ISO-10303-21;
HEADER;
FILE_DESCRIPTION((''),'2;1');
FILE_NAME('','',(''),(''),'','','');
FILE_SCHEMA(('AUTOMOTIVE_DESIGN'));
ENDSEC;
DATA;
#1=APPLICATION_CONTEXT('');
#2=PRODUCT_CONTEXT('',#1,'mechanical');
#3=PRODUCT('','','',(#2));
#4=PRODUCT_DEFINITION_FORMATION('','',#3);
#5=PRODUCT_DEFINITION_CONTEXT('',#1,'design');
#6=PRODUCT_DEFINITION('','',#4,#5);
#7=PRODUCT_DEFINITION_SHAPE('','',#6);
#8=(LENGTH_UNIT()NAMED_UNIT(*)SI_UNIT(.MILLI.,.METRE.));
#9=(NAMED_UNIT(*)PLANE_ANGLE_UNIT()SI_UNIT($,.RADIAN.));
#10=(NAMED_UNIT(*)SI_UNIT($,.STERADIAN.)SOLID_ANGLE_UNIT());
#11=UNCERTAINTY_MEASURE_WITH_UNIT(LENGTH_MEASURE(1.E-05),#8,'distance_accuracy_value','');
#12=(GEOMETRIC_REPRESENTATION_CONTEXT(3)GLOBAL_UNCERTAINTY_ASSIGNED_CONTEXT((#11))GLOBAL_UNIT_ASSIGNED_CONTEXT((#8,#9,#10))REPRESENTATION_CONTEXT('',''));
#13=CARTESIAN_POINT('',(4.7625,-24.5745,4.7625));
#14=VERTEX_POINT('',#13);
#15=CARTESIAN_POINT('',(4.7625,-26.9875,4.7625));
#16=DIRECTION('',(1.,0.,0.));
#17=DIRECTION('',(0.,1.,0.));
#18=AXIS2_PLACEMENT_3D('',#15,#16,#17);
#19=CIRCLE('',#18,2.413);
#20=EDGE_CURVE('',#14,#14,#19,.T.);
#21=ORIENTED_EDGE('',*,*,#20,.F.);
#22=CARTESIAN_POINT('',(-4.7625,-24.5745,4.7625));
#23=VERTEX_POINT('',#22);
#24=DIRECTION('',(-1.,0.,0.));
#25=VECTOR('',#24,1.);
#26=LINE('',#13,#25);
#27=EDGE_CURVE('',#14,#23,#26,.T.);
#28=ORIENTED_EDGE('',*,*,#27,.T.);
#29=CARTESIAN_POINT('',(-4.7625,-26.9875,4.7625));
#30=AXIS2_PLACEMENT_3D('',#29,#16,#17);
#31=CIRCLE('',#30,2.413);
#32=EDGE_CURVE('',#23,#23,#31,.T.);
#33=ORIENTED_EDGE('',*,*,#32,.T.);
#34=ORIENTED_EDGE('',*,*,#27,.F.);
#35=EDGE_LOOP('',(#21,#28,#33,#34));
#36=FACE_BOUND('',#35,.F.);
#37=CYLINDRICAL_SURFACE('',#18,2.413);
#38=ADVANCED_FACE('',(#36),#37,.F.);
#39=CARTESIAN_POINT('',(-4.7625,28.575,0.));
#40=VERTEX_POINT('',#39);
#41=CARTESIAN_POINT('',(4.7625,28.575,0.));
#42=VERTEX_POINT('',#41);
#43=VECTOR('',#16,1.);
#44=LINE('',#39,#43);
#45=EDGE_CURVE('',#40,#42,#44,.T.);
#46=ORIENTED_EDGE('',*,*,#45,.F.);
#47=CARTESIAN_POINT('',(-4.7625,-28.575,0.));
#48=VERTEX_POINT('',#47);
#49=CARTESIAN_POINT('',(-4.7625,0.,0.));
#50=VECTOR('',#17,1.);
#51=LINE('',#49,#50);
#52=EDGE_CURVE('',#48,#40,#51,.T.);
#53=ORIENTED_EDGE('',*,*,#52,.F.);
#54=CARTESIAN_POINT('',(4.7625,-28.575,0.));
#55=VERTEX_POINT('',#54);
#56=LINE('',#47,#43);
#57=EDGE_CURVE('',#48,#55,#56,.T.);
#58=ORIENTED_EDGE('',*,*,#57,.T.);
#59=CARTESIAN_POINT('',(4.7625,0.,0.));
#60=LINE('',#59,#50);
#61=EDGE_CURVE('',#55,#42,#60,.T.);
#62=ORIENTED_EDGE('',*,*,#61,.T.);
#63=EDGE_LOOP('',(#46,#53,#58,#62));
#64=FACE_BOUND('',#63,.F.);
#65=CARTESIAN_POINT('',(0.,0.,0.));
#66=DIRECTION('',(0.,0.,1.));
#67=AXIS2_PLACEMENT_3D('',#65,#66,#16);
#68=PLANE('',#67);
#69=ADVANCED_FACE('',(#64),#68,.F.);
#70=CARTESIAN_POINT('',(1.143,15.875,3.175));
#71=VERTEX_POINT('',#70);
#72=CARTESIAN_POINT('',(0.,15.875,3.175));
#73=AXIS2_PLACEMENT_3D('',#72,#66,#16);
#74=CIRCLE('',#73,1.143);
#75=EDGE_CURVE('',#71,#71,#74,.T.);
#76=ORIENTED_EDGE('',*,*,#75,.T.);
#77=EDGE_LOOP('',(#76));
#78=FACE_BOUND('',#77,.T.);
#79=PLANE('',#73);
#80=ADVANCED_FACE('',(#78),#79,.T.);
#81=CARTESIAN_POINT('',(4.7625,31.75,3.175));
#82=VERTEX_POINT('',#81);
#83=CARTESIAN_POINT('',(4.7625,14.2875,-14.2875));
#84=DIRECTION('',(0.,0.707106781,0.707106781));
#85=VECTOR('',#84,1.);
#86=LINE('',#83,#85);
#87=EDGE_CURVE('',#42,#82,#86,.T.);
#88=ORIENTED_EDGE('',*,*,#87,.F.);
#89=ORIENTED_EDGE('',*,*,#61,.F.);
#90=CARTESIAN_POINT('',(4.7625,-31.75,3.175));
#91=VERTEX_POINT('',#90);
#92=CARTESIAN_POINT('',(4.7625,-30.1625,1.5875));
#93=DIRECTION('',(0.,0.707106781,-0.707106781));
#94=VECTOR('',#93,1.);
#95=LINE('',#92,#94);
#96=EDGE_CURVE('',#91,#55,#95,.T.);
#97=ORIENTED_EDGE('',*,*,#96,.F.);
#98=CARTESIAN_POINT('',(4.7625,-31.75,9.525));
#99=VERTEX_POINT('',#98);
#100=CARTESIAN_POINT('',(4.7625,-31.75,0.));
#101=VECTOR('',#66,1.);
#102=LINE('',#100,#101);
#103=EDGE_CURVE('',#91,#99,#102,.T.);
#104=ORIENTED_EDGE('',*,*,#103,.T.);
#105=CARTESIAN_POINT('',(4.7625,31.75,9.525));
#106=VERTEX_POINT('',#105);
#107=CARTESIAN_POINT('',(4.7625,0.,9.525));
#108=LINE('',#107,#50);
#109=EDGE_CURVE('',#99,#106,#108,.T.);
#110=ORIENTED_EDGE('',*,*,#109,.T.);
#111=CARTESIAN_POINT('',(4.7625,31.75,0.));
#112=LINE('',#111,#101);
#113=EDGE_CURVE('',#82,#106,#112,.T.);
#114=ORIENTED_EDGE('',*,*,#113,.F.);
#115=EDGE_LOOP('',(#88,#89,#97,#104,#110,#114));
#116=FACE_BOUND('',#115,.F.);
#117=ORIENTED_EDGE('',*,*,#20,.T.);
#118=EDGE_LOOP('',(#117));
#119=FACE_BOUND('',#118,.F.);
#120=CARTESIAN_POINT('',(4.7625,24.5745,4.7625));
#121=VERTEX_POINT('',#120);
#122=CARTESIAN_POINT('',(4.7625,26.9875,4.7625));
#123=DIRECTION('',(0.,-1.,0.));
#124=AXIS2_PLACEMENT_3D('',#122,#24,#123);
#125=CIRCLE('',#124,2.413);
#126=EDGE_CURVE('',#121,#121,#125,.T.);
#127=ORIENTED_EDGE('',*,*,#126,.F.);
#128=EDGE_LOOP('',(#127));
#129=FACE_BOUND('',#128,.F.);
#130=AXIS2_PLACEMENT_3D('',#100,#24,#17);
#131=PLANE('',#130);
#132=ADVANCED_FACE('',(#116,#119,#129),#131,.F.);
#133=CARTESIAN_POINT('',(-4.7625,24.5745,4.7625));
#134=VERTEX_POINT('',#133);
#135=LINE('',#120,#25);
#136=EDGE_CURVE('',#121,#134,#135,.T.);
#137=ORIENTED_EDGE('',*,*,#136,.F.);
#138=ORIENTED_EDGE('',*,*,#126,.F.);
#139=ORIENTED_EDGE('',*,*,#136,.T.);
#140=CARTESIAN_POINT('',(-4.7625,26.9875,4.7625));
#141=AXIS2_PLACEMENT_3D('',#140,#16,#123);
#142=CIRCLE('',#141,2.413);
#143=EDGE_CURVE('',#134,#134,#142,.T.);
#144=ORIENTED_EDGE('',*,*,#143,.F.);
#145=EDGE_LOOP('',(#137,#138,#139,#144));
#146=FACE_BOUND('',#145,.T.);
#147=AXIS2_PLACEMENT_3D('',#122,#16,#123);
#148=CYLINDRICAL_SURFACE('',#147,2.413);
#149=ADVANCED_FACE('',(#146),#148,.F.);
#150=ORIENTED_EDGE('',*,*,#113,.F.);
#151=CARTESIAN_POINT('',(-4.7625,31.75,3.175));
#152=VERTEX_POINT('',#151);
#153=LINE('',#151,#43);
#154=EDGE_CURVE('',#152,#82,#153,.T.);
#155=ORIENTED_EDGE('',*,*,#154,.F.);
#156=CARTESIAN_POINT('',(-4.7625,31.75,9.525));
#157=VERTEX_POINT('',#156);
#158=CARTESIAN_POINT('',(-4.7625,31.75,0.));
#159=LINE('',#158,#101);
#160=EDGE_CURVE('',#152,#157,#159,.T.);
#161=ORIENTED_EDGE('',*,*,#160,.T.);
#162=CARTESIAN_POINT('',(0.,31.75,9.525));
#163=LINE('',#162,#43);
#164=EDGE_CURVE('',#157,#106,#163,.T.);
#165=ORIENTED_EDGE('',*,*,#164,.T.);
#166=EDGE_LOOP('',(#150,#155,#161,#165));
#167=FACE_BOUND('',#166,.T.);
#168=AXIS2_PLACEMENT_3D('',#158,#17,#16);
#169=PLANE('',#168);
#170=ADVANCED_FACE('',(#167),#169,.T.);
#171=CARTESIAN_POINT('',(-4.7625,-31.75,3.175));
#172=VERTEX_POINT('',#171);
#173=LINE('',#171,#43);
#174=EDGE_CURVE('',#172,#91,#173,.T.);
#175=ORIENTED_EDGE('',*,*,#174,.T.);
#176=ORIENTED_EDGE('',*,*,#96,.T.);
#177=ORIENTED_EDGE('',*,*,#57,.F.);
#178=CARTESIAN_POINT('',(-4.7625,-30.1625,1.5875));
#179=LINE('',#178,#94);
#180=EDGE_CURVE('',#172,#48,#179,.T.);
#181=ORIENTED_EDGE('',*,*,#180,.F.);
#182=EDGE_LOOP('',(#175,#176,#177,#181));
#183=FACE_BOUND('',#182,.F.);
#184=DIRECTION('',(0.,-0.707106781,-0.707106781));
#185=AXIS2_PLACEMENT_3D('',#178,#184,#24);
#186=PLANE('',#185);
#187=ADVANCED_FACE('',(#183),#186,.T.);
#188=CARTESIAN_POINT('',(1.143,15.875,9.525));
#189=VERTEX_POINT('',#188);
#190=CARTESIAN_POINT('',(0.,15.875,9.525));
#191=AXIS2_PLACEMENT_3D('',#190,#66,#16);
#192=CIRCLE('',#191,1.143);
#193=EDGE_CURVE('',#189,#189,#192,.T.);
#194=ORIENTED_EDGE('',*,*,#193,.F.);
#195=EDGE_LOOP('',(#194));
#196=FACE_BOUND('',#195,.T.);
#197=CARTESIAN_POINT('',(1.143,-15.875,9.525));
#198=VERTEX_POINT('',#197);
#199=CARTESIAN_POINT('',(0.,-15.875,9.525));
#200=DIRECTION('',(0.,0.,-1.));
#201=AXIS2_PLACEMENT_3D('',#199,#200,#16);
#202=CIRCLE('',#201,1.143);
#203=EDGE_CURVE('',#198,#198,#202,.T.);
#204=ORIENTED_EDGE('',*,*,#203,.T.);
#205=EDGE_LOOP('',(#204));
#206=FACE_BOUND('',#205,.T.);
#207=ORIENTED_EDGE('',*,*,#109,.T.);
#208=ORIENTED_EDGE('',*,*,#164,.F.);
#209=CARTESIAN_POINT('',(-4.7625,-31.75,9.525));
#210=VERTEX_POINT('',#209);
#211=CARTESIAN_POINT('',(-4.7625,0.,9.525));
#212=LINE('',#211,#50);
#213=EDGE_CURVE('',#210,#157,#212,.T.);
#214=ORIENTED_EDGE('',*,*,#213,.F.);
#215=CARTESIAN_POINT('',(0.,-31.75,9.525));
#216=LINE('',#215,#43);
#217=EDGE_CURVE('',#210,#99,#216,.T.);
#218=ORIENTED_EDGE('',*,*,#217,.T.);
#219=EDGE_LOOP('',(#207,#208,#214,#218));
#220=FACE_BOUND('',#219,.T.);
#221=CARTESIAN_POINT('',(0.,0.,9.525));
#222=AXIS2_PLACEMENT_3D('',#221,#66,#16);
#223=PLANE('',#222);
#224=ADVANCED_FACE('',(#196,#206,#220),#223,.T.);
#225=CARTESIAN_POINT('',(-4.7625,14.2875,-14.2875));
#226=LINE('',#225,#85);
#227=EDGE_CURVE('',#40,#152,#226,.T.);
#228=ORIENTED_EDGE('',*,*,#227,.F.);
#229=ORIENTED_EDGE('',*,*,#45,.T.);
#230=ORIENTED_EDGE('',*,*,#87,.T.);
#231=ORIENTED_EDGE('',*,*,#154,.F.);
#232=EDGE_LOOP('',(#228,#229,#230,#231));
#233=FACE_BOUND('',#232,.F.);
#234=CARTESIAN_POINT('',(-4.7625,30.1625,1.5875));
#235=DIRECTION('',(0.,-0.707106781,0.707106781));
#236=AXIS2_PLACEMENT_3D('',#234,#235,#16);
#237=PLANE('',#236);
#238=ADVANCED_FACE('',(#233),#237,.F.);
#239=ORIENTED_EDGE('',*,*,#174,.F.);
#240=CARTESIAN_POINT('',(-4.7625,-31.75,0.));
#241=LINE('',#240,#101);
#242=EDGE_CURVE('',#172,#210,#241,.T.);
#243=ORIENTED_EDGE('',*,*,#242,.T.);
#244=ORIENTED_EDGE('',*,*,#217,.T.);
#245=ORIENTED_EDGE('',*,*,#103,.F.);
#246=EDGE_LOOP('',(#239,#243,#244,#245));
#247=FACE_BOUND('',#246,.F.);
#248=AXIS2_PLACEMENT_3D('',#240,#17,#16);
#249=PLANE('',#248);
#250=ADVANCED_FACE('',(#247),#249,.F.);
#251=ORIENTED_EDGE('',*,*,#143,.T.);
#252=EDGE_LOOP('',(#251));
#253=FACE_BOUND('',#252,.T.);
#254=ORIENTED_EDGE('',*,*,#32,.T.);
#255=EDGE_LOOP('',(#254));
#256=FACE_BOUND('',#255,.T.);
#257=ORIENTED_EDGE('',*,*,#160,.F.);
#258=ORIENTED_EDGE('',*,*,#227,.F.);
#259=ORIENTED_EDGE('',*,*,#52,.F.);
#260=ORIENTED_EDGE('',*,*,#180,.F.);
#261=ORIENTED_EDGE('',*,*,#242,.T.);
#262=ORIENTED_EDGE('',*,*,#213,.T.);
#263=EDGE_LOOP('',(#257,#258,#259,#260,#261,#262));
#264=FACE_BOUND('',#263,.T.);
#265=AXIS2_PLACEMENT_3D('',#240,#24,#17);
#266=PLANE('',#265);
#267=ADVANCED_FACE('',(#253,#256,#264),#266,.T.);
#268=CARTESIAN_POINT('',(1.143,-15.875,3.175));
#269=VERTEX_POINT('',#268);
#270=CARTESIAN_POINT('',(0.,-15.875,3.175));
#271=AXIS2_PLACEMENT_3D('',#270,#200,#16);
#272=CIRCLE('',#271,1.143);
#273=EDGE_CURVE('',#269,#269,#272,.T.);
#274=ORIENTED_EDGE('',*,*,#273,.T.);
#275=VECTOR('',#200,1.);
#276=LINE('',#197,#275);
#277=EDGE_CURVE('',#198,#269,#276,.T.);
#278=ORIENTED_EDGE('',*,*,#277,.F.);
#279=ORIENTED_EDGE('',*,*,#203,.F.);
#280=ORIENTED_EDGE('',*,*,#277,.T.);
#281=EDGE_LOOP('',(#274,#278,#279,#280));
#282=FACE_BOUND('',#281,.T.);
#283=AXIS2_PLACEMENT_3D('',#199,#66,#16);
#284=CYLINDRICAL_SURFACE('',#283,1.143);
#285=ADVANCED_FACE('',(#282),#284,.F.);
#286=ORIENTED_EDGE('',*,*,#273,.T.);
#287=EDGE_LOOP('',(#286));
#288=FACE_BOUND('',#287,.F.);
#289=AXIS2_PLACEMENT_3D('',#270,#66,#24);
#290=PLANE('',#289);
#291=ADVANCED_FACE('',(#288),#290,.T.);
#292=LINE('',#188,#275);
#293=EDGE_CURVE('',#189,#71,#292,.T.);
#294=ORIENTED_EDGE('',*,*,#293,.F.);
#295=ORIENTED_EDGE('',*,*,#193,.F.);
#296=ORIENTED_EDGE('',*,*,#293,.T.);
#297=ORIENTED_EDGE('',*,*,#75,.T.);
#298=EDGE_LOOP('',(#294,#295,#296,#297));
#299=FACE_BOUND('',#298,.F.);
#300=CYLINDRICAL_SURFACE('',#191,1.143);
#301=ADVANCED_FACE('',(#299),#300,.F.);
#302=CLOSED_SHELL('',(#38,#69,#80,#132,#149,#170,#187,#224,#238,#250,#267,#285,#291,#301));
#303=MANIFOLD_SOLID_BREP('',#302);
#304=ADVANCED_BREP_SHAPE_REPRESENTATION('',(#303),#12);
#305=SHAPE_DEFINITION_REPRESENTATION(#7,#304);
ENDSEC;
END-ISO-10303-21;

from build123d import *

# Parameters (mm, degrees)
F0_W     = 9.525
F0_H     = 63.5
F1_DEPTH = 9.525
F2_R     = 2.413
F3_DEPTH = 9.526
F4_R     = 1.143
F5_DEPTH = 6.35
F6_SIZE  = 3.175


# Not quite as in the source:
# - a pattern or mirror of a feature is missing from the dataset's text; its kind, count and spacing are read off the source's solid


with BuildPart() as f1:
    # F0 (on Top) → F1 (new body)
    with BuildSketch(Plane.XY):
        Rectangle(F0_W, F0_H)
    extrude(amount=F1_DEPTH)

    # F2 (on face) → F3 (cut, through all)
    with BuildSketch(Plane.YZ.offset(4.7625)):
        with Locations((-26.9875, 4.7625)):
            Circle(F2_R)
    f3 = extrude(amount=-F3_DEPTH, mode=Mode.SUBTRACT)

    # F3_copies: F3 across plane
    add(f3.mirror(Plane.ZX), mode=Mode.SUBTRACT)

    # F4 (on face) → F5 (cut)
    with BuildSketch(Plane.XY.offset(9.525)):
        with Locations((0, 15.875)):
            Circle(F4_R)
    f5 = extrude(amount=-F5_DEPTH, mode=Mode.SUBTRACT)

    # F5_copies: F5 across plane
    add(f5.mirror(Plane(origin=(0, 0, 0), x_dir=(0, 0, -1), z_dir=(0, -1, 0))), mode=Mode.SUBTRACT)

    # F6
    f6_edges = [f1.edges().sort_by_distance(p)[0] for p in [
        (0, -31.75, 0),
        (0, 31.75, 0),
    ]]
    chamfer(f6_edges, length=F6_SIZE)


solid = f1.part
